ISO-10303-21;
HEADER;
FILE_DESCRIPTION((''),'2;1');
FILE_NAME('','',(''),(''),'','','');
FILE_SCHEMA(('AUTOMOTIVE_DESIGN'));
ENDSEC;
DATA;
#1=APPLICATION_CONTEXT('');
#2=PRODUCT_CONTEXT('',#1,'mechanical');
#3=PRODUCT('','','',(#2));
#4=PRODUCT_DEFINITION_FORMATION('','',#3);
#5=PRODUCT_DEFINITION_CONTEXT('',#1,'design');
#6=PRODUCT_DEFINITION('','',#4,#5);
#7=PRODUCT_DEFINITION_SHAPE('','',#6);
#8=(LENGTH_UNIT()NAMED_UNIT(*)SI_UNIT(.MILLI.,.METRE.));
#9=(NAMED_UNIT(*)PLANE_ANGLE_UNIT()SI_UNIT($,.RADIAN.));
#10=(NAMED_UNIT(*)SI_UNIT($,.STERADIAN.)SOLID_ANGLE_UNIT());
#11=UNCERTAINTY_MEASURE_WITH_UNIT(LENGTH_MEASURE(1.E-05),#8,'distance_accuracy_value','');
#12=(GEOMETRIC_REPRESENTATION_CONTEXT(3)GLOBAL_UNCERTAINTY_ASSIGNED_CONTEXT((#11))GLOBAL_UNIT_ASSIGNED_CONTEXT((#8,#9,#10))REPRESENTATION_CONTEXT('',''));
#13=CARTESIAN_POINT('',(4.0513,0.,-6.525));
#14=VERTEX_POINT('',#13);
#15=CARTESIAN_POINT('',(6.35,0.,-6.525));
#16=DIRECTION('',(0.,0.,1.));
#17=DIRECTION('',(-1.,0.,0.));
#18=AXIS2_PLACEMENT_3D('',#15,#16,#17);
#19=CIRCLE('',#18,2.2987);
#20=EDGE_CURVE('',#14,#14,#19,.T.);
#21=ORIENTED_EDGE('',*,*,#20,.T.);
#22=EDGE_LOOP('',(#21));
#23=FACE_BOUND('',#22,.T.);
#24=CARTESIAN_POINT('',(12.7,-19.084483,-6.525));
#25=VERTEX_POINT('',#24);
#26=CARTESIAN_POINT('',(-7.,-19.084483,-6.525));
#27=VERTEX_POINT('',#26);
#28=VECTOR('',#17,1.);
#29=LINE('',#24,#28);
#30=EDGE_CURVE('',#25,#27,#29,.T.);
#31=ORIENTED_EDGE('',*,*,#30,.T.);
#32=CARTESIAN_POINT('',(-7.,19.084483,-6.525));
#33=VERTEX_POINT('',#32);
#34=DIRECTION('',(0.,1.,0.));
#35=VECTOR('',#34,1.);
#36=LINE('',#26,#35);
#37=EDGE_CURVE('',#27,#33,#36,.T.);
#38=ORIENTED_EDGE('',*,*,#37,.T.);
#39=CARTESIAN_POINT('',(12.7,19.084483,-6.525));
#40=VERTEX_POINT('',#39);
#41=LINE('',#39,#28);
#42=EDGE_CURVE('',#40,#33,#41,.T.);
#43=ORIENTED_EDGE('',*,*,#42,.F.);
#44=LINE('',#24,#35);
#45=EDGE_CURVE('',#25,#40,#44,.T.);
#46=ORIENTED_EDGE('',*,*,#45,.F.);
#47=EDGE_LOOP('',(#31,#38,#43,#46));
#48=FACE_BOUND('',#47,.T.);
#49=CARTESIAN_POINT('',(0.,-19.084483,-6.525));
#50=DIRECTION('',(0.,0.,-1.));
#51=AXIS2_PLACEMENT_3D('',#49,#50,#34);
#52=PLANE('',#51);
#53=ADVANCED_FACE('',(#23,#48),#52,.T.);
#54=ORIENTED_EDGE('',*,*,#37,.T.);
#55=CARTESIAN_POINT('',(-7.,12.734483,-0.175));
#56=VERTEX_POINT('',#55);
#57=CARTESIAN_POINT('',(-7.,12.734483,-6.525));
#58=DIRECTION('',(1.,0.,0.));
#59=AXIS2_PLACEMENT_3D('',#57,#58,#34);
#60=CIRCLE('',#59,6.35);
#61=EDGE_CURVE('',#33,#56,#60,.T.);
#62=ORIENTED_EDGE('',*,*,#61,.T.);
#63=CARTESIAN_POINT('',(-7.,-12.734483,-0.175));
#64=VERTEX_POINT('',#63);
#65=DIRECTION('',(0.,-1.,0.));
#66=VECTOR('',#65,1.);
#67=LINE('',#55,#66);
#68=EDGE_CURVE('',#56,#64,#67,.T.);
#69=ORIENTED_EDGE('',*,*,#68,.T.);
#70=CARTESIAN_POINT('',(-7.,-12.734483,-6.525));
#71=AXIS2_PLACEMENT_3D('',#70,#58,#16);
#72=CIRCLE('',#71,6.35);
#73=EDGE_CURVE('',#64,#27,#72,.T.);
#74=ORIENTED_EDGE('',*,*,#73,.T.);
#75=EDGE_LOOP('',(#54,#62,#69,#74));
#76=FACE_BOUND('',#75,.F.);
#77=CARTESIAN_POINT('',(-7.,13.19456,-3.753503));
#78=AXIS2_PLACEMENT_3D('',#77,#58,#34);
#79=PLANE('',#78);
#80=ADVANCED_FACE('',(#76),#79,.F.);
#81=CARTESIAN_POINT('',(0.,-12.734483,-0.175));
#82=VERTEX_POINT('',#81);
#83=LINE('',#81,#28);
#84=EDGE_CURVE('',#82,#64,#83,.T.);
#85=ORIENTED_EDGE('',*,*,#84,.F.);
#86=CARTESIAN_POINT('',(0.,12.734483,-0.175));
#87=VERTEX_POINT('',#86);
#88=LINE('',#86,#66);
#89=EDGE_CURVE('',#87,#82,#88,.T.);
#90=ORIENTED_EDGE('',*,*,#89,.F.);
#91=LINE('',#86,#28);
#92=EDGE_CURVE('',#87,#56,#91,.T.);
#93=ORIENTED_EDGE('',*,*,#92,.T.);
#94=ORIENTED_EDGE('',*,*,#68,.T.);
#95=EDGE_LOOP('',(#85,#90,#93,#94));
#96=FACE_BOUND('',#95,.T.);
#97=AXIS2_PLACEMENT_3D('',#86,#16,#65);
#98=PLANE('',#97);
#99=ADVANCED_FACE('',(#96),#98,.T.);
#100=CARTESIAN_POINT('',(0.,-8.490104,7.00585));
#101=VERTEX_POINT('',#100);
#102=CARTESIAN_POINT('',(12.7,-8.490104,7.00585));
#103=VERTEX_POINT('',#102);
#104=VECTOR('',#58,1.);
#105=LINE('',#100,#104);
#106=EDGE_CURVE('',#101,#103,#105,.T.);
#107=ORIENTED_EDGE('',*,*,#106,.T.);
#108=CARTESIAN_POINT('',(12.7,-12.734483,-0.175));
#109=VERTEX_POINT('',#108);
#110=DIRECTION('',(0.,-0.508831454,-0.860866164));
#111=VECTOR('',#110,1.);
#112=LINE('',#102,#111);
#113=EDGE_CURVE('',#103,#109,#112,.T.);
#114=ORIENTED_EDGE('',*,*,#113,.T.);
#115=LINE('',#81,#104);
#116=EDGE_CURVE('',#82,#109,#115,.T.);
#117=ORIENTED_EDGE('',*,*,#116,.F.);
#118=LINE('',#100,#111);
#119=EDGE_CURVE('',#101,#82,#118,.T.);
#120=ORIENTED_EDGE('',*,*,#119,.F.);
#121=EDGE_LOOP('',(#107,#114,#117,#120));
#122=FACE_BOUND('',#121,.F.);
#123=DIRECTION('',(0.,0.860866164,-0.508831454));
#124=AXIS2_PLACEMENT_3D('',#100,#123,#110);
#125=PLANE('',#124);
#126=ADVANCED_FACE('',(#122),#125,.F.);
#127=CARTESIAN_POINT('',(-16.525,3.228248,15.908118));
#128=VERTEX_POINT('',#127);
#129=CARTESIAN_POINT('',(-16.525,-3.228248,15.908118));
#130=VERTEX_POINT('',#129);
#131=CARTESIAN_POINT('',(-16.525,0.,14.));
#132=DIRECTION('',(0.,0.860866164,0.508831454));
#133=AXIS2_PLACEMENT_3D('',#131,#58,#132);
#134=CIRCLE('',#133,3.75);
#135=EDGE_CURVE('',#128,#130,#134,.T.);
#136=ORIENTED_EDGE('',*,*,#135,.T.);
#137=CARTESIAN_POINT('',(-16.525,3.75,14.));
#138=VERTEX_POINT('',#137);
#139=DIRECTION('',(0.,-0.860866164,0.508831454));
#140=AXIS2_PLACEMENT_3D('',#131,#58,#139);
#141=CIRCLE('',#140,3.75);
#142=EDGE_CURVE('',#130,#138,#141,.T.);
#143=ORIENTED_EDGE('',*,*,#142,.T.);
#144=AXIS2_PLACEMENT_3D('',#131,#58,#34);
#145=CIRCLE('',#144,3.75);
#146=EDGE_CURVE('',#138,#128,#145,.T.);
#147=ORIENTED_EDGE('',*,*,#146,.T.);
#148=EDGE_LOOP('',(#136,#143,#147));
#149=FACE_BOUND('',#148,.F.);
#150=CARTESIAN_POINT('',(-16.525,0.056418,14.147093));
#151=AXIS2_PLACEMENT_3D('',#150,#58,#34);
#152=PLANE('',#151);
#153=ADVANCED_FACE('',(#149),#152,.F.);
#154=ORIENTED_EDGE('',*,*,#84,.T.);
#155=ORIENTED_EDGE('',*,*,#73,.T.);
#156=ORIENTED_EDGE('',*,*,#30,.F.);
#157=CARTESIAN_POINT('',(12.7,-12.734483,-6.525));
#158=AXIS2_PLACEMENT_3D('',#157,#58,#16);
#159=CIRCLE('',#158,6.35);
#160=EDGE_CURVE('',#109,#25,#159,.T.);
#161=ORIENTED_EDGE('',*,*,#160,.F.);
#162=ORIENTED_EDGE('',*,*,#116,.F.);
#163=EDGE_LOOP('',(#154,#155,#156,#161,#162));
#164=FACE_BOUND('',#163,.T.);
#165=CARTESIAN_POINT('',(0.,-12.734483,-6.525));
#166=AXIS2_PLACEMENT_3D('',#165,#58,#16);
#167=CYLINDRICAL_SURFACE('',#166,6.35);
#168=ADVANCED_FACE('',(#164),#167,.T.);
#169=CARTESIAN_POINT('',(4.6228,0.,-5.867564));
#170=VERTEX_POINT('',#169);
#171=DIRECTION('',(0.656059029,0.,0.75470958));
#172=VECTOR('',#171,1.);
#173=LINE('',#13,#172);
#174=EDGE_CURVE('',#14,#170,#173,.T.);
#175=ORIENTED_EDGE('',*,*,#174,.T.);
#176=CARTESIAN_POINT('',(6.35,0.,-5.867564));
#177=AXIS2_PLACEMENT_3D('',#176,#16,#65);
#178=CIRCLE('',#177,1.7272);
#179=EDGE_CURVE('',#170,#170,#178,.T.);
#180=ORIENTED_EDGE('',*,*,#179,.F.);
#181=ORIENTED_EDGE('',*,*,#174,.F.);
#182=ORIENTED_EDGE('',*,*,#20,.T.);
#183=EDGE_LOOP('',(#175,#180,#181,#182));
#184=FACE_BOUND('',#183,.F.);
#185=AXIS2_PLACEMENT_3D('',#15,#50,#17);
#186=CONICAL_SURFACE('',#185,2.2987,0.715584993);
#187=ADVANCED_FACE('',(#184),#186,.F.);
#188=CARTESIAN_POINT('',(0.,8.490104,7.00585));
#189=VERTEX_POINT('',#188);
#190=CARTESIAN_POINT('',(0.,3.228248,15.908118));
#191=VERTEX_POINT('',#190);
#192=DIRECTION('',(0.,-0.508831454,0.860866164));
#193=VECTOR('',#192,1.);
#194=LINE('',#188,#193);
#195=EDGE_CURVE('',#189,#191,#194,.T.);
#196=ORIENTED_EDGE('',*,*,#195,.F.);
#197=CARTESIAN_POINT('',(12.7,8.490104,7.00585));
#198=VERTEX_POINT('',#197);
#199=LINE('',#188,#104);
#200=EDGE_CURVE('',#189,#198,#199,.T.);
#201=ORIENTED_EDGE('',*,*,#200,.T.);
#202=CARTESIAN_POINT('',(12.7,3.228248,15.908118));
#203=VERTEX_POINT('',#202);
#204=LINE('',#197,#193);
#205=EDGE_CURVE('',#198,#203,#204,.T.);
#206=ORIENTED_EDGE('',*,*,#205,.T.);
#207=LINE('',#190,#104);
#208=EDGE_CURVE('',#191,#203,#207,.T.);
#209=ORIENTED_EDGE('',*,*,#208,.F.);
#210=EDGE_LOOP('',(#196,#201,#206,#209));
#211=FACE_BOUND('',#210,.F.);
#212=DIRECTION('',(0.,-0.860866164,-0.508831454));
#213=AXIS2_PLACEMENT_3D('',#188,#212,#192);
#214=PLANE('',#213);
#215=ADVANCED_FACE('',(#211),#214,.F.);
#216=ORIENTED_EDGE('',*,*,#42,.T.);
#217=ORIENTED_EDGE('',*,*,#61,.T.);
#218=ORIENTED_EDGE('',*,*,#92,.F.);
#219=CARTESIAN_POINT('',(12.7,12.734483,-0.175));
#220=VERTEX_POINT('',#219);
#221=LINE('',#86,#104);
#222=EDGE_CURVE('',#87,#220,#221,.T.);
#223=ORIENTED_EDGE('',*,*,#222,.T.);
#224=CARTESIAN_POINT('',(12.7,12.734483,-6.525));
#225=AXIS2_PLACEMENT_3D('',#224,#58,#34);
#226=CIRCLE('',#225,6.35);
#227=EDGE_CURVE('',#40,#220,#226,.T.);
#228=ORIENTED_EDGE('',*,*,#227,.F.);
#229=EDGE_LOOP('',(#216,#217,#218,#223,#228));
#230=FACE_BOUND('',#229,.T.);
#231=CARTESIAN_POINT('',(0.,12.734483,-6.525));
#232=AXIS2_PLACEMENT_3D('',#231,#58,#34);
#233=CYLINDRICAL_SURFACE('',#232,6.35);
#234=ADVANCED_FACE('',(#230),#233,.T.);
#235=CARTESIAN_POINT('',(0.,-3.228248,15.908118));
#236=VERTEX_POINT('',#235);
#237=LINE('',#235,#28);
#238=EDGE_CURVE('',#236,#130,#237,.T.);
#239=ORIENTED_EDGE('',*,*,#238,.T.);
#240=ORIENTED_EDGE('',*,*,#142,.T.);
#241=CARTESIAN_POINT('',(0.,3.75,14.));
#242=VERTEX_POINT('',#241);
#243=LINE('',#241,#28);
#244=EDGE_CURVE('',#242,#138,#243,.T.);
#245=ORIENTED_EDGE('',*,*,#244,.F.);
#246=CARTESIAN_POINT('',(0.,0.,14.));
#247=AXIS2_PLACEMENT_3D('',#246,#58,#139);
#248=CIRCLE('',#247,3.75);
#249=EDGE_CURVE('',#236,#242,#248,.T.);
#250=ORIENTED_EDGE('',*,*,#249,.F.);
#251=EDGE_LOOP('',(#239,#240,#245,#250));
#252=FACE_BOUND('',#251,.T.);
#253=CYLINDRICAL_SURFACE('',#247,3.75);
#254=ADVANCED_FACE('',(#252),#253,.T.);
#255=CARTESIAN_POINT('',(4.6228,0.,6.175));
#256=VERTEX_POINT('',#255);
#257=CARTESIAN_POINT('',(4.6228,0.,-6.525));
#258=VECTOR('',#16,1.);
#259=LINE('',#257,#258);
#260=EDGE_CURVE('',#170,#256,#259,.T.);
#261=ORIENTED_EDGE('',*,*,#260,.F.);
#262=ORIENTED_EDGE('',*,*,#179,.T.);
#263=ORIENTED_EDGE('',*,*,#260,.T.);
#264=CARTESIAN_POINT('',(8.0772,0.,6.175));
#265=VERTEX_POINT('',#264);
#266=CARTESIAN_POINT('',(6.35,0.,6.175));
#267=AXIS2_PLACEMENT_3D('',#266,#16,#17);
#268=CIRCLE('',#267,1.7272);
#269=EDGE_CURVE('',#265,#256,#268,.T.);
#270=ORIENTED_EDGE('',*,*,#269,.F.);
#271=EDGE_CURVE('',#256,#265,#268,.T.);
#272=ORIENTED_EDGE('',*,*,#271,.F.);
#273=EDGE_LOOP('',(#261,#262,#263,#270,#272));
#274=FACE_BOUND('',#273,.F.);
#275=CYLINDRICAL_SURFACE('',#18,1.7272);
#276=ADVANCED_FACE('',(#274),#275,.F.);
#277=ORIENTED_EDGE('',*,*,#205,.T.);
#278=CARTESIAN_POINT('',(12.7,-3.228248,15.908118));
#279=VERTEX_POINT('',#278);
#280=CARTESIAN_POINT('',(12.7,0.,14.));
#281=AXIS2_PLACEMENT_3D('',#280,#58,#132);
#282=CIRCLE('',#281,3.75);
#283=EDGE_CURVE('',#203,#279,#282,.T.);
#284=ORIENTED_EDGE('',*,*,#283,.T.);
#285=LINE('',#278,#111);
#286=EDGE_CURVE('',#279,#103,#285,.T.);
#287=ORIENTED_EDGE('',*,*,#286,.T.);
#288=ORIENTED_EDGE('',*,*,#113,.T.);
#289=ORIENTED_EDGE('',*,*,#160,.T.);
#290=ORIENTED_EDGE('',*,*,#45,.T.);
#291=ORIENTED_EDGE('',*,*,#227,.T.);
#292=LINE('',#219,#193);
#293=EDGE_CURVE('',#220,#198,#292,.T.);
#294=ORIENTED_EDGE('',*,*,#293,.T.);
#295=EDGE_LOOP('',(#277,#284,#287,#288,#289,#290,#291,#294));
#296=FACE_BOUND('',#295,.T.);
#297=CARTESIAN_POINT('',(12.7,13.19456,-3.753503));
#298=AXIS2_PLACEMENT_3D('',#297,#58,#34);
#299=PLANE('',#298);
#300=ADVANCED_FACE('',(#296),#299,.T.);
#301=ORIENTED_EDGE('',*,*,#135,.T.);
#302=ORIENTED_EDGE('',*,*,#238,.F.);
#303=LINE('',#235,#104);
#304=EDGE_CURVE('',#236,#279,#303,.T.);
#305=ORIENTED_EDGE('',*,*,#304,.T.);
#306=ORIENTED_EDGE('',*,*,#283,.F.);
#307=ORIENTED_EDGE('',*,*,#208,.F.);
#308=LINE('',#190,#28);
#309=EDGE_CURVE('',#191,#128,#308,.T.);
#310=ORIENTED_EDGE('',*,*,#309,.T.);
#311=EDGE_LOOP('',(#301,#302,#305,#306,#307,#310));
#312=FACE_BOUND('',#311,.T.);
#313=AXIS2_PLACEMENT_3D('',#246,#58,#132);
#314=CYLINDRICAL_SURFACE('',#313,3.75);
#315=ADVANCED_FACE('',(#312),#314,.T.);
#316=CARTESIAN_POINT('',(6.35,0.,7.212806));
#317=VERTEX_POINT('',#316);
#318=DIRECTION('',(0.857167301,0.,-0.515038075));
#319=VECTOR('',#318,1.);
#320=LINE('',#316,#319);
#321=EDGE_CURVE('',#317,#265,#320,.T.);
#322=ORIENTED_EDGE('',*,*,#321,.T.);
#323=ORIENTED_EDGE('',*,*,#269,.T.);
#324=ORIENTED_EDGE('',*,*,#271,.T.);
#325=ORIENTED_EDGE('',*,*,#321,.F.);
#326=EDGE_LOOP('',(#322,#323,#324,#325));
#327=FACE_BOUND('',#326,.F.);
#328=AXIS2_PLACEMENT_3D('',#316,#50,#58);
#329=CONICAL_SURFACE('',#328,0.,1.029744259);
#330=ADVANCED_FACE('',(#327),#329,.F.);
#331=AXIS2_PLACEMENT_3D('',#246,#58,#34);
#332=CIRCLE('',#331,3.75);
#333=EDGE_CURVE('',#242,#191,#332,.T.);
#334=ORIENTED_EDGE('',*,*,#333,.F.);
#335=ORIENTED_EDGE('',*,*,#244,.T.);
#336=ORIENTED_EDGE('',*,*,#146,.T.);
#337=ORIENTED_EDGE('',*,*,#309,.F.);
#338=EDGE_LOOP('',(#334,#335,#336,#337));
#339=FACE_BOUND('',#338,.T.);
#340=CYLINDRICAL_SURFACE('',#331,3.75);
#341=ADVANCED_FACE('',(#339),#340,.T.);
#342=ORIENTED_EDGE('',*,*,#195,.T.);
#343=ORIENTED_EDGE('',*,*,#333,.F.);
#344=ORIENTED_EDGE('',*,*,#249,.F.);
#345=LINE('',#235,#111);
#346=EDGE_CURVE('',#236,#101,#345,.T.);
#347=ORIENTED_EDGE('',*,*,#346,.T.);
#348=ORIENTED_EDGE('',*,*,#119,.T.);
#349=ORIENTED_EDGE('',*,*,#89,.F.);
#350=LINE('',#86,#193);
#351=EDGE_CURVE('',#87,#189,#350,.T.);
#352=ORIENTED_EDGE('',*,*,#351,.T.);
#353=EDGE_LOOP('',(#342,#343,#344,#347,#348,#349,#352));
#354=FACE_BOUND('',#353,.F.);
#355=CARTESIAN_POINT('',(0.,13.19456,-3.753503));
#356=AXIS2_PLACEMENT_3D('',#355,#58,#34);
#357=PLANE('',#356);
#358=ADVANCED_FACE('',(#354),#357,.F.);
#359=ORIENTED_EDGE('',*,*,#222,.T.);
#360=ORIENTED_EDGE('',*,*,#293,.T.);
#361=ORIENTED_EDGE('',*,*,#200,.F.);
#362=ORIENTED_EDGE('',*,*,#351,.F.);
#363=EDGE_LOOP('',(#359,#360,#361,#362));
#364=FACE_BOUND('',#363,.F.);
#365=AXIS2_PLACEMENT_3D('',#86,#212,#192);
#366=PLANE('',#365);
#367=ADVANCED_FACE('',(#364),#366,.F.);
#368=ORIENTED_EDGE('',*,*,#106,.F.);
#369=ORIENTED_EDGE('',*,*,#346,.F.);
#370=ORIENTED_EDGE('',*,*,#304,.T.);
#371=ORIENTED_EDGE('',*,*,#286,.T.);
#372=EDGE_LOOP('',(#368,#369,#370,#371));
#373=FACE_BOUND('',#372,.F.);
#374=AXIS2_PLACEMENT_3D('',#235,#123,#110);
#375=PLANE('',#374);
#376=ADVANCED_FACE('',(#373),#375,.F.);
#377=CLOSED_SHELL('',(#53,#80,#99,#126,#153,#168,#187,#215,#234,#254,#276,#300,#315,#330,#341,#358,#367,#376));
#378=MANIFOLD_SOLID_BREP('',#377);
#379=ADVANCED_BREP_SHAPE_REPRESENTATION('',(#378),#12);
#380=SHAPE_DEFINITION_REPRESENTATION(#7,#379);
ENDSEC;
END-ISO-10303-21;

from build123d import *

# Parameters (mm, degrees)
F0_W           = 8.4991231561
F0_H           = 6.35
F1_DEPTH       = 12.7
F2_DEPTH       = 16.525
F3_DEPTH       = 7
F5_D           = 3.4544
F5_DEPTH       = 12.7
F5_CSINK_D     = 4.5974
F5_CSINK_ANGLE = 82
F5_TIP         = 1.0378064612


# Not quite as in the source:
# - a length typed as a fraction of an inch, garbled in the dataset ("3 / 203.2 mm" for 3/8 in), is restored


with BuildPart() as f1:
    # F0 (on Right) → F1 (new body)
    with BuildSketch(Plane.YZ):
        with BuildLine():
            ThreePointArc((19.0844833851, -6.525), (17.2246114456, -2.0348719395), (12.7344833851, -0.175))
            Line((12.7344833851, -0.175), (8.4991231561, -0.175))
            Line((8.4991231561, -0.175), (8.4991231561, -6.525))
            Line((8.4991231561, -6.525), (19.0844833851, -6.525))
        make_face()
        with BuildLine():
            Line((-8.4991231561, -0.175), (-12.7344833851, -0.175))
            ThreePointArc((-12.7344833851, -0.175), (-17.2246114456, -2.0348719395), (-19.0844833851, -6.525))
            Line((-19.0844833851, -6.525), (-8.4991231561, -6.525))
            Line((-8.4991231561, -6.525), (-8.4991231561, -0.175))
        make_face()
        with BuildLine():
            ThreePointArc((8.4901041675, 7.0058502143), (0, 3), (-8.4901041675, 7.0058502143))
            Line((-8.4901041675, 7.0058502143), (-12.7344833851, -0.175))
            Line((-12.7344833851, -0.175), (-8.4991231561, -0.175))
            Line((-8.4991231561, -0.175), (0, -0.175))
            Line((0, -0.175), (8.4991231561, -0.175))
            Line((8.4991231561, -0.175), (12.7344833851, -0.175))
            Line((12.7344833851, -0.175), (8.4901041675, 7.0058502143))
        make_face()
        with BuildLine():
            Line((-3.2282481135, 15.9081179517), (-8.4901041675, 7.0058502143))
            ThreePointArc((-8.4901041675, 7.0058502143), (0, 3), (8.4901041675, 7.0058502143))
            Line((8.4901041675, 7.0058502143), (3.2282481135, 15.9081179517))
            ThreePointArc((3.2282481135, 15.9081179517), (3.6172109716, 14.9890828009), (3.75, 14))
            ThreePointArc((3.75, 14), (-0.9890828009, 10.3827890284), (-3.2282481135, 15.9081179517))
        make_face()
        with BuildLine():
            ThreePointArc((3.2282481135, 15.9081179517), (0, 17.75), (-3.2282481135, 15.9081179517))
            ThreePointArc((-3.2282481135, 15.9081179517), (-0.9890828009, 10.3827890284), (3.75, 14))
            ThreePointArc((3.75, 14), (3.6172109716, 14.9890828009), (3.2282481135, 15.9081179517))
        make_face()
        with Locations((4.249561578, -3.35)):
            Rectangle(F0_W, F0_H)
        with Locations((-4.249561578, -3.35)):
            Rectangle(F0_W, F0_H)
    extrude(amount=F1_DEPTH)

    # F0 (on Right) → F2 (join)
    with BuildSketch(Plane.YZ):
        with BuildLine():
            ThreePointArc((3.2282481135, 15.9081179517), (0, 17.75), (-3.2282481135, 15.9081179517))
            ThreePointArc((-3.2282481135, 15.9081179517), (-0.9890828009, 10.3827890284), (3.75, 14))
            ThreePointArc((3.75, 14), (3.6172109716, 14.9890828009), (3.2282481135, 15.9081179517))
        make_face()
    extrude(amount=-F2_DEPTH)

    # F0 (on Right) → F3 (join)
    with BuildSketch(Plane.YZ):
        with BuildLine():
            ThreePointArc((19.0844833851, -6.525), (17.2246114456, -2.0348719395), (12.7344833851, -0.175))
            Line((12.7344833851, -0.175), (8.4991231561, -0.175))
            Line((8.4991231561, -0.175), (8.4991231561, -6.525))
            Line((8.4991231561, -6.525), (19.0844833851, -6.525))
        make_face()
        with BuildLine():
            Line((-8.4991231561, -0.175), (-12.7344833851, -0.175))
            ThreePointArc((-12.7344833851, -0.175), (-17.2246114456, -2.0348719395), (-19.0844833851, -6.525))
            Line((-19.0844833851, -6.525), (-8.4991231561, -6.525))
            Line((-8.4991231561, -6.525), (-8.4991231561, -0.175))
        make_face()
        with Locations((4.249561578, -3.35)):
            Rectangle(F0_W, F0_H)
        with Locations((-4.249561578, -3.35)):
            Rectangle(F0_W, F0_H)
    extrude(amount=-F3_DEPTH)

    # F5
    with Locations(Plane(origin=(0, 0, -6.525), x_dir=(1, 0, 0), z_dir=(0, 0, -1))):
        with Locations((6.35, 0)):
            CounterSinkHole(F5_D / 2, F5_CSINK_D / 2, depth=F5_DEPTH, counter_sink_angle=F5_CSINK_ANGLE)
            with Locations((0, 0, -(F5_DEPTH + F5_TIP / 2))):  # 118° drill point
                Cone(0, F5_D / 2, F5_TIP, mode=Mode.SUBTRACT)


solid = f1.part
